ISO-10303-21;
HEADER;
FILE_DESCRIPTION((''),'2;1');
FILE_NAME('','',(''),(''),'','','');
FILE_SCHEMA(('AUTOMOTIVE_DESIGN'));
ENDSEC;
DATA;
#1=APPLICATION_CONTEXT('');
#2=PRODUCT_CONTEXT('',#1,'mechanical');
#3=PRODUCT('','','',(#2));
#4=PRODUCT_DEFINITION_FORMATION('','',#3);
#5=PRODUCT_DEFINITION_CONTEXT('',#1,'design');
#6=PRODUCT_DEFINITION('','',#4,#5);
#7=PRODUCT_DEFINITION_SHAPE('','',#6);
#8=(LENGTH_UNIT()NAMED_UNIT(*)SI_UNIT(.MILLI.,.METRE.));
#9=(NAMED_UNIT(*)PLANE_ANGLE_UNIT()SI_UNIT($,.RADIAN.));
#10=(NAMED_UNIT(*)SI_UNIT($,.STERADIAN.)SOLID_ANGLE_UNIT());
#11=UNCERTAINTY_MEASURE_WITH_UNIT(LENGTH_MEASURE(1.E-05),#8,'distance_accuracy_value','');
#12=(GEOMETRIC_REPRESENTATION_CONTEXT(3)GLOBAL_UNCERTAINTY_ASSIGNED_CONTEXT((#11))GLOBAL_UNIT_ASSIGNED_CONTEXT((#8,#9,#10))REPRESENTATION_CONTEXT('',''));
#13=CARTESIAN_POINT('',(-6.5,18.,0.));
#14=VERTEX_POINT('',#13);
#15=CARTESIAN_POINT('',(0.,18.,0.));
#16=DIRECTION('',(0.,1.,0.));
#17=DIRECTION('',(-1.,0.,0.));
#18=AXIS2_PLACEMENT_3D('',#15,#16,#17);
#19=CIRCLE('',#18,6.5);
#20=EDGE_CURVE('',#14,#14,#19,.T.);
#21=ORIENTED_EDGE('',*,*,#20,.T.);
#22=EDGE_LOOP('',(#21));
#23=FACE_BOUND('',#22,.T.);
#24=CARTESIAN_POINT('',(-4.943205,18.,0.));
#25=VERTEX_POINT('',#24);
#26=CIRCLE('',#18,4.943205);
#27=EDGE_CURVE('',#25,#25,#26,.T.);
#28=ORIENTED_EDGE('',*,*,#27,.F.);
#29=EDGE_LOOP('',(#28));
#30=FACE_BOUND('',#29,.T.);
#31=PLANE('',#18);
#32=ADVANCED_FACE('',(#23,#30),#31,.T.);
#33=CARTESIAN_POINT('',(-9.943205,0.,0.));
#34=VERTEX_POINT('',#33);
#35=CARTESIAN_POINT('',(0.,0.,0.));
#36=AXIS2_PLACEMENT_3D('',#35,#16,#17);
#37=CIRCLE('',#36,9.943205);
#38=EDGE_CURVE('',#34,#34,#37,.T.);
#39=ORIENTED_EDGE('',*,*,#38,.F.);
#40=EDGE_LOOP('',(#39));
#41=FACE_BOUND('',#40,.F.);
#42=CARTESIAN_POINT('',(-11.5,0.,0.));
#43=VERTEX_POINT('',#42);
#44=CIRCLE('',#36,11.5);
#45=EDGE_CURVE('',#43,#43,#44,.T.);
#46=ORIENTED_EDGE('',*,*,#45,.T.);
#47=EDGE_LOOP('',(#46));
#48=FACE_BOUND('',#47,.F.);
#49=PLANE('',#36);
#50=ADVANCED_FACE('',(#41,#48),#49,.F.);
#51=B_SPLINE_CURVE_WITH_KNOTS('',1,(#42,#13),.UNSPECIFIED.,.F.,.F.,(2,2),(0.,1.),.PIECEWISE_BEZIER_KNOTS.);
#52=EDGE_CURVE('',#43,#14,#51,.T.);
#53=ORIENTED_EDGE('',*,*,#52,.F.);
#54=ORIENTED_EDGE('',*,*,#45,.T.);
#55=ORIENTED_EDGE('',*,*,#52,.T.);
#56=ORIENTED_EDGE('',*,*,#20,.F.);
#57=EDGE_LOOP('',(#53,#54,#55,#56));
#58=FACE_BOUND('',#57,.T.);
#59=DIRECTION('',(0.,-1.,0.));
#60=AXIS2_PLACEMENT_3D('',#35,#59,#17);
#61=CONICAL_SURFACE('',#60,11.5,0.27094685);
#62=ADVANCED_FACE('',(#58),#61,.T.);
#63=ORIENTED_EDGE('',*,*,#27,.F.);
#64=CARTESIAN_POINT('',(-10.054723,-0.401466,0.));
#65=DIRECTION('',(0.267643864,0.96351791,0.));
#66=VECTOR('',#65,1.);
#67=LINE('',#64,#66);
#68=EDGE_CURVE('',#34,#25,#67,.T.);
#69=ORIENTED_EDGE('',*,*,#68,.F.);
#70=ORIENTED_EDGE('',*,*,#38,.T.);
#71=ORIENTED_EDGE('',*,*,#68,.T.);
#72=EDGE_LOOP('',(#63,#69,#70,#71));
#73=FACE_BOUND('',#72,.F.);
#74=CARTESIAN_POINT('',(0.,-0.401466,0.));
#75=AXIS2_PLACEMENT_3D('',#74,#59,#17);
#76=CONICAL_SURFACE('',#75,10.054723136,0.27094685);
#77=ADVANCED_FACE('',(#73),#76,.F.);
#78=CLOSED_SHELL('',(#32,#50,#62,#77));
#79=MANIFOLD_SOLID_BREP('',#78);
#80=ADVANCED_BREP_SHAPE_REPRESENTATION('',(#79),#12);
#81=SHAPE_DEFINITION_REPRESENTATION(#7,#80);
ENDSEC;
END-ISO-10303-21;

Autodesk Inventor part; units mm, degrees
ref_plane "YZ Plane" through (0, 0, 0) normal (1, 0, 0) x (0, 1, 0)
ref_plane "XY Plane" through (0, 0, 0) normal (0, 0, 1) x (1, 0, 0)
sketch "Szkic6" plane through (0, 0, 0) normal (0, 1, 0) x (-1, 0, 0)
  circle A0 centre (0, 0) radius 11.5
  dimension "d33" = 23
ref_plane "Płaszczyzna konstrukcyjna1" through (0, 18, 0) normal (0, 1, 0) x (-1, 0, 0)
sketch "Szkic7" plane through (0, 18, 0) normal (0, 1, 0) x (-1, 0, 0)
  circle A0 centre (0, 0) radius 6.5
  dimension "d35" = 13
loft "Wyciągnięcie złożone1" add profiles "Szkic6", "Szkic7"
shell "Skorupa1" thickness 1.5 removed faces 2 at (-1.6847, 18, 1.9553) at (-0.1507, 0, 2.542)
equation "\"d33\" = OD1"
equation "\"d35\" = OD2"
equation "\"d52\" = THK"
equation "\"SzerokośćGięciaPodcięcia\" = Grubość"
equation "\"RozmiarPodcięciaNarożnika\" = 4 * Grubość"
equation "\"PromieńPrzejścia\" = PromieńGięcia"
equation "\"Rozmiar_promienia_Jacobiego\" = PromieńGięcia"
equation "\"Wielk_odstępu\" = Grubość"
equation "\"d2\" = PromieńGięcia"
equation "\"d23\" = PromieńGięcia"
equation "\"OD1\" = 23"
equation "\"OD2\" = 13"
equation "\"L\" = 18"
equation "\"THK\" = 1.5"
equation "\"d34\" = L"
equation "\"Grubość\" = 1.5"
equation "\"PromieńGięcia\" = 3"
properties part number "Redukcja symetryczna Ø23x13x1,5 L=18" material "304"
